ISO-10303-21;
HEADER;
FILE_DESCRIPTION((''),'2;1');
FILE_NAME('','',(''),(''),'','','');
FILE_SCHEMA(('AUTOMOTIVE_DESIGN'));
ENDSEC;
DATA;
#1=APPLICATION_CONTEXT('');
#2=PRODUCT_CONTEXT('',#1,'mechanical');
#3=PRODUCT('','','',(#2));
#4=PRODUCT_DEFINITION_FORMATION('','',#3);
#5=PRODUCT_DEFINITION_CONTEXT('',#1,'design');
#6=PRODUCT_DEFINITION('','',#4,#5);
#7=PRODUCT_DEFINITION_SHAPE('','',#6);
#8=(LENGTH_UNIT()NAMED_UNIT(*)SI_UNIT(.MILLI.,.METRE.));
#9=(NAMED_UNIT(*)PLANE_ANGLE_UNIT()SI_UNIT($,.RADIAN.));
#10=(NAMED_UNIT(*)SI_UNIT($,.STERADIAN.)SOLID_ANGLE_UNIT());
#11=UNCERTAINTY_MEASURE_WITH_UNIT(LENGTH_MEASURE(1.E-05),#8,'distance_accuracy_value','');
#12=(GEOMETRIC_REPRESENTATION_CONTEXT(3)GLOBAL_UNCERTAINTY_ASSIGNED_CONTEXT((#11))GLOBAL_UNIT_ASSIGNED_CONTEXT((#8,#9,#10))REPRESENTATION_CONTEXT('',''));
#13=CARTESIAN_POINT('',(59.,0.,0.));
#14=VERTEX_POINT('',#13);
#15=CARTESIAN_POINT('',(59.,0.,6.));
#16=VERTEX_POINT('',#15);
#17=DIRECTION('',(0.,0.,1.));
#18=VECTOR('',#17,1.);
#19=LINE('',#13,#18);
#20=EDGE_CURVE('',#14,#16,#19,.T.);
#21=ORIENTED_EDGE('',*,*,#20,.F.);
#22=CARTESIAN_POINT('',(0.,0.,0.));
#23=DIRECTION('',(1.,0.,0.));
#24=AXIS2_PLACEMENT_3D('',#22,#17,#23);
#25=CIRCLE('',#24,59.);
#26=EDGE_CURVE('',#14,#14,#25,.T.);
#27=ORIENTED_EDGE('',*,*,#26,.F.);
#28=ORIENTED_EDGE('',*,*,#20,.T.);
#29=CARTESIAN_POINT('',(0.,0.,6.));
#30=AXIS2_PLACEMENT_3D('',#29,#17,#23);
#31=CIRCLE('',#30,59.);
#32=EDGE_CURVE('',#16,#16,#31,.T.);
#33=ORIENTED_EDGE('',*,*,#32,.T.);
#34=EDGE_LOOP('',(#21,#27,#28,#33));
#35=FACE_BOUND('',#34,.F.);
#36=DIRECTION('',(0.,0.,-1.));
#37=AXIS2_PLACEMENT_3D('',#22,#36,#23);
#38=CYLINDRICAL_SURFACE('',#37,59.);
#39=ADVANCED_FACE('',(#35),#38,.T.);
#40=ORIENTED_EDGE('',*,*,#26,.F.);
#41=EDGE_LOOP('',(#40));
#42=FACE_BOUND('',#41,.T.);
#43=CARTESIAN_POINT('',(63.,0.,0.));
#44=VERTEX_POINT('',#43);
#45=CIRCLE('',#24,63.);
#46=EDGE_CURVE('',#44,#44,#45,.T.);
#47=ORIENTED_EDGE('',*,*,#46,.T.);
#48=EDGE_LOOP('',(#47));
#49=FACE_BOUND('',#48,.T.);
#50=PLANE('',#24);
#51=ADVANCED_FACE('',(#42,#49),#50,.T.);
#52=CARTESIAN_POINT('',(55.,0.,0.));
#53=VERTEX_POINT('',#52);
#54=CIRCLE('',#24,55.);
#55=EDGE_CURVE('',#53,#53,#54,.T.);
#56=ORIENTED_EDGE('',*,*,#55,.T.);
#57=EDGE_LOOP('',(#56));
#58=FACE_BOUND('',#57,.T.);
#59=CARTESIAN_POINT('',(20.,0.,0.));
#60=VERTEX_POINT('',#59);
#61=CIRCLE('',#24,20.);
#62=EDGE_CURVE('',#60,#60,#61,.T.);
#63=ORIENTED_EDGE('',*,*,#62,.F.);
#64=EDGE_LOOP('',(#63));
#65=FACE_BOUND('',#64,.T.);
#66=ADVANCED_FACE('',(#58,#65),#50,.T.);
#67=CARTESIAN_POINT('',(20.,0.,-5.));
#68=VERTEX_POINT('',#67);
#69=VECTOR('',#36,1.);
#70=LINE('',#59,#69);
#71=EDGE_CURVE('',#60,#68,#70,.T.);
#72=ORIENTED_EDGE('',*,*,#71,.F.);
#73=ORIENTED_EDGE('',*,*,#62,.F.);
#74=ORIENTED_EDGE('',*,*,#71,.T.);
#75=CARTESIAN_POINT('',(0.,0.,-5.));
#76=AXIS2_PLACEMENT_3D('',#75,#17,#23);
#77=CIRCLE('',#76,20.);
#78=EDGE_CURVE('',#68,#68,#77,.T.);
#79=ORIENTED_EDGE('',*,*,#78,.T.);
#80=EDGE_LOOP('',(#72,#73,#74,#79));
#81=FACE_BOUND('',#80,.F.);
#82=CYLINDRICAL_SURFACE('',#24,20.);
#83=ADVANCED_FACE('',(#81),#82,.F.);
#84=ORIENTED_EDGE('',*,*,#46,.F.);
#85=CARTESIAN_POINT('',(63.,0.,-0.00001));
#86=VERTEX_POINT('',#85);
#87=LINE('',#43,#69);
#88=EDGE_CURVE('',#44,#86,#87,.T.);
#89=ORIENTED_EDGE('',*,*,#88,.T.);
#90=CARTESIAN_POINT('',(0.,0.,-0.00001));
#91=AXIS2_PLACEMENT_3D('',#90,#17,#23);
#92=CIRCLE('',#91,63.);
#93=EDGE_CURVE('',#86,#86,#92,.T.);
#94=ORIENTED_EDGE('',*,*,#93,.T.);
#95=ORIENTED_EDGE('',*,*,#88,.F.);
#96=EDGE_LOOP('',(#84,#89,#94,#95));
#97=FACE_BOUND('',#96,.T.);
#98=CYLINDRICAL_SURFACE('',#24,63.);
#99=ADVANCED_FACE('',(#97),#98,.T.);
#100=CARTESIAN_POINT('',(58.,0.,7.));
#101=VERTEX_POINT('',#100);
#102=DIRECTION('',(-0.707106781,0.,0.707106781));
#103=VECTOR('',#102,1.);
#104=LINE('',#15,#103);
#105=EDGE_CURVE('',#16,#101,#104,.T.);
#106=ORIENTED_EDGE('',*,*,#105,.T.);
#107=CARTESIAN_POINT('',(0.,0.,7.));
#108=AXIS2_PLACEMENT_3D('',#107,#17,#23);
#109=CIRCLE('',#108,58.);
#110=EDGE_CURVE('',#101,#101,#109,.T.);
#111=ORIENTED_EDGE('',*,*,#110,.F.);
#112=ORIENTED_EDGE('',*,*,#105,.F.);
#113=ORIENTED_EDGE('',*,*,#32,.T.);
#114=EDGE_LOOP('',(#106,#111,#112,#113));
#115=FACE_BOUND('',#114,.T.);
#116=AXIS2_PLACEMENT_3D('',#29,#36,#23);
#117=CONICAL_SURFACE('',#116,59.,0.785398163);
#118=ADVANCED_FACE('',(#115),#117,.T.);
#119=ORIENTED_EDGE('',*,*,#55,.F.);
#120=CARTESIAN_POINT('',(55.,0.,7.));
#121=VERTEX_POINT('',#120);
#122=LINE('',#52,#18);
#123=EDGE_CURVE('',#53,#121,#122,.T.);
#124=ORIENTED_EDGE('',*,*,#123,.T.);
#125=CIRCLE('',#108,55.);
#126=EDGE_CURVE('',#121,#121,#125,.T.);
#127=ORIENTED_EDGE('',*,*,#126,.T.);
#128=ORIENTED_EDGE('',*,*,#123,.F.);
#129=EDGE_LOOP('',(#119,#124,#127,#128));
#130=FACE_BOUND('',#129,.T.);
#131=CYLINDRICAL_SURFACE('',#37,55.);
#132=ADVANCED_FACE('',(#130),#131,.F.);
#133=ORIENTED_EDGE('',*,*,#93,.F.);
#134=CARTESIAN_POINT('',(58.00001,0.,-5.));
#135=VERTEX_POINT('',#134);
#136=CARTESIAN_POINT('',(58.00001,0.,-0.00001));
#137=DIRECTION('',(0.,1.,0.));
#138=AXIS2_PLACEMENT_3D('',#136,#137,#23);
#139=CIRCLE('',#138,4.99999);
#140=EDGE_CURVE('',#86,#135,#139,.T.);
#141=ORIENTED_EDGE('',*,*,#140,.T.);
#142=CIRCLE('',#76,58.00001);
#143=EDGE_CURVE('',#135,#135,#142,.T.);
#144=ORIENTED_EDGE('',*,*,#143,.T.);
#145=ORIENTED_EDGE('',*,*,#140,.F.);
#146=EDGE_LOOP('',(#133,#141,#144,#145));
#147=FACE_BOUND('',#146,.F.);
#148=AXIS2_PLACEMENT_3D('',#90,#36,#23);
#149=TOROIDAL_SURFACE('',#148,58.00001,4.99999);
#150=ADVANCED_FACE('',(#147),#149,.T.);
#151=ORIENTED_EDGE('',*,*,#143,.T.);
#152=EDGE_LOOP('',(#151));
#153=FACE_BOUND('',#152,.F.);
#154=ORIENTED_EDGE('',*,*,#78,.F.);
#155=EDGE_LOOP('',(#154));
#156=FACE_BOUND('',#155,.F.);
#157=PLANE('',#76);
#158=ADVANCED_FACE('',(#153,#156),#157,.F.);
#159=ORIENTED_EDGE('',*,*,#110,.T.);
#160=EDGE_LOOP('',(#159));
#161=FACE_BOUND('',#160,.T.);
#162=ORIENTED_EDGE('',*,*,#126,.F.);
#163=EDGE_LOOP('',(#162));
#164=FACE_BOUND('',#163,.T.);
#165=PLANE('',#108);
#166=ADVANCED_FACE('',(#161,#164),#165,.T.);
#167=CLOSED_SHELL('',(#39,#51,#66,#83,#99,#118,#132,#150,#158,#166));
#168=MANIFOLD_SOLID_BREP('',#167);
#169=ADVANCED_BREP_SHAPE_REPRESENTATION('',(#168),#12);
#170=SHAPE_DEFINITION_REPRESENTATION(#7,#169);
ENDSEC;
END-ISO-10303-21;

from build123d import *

# Parameters (mm, degrees)
F0_R     = 59
F0_R_2   = 55
F1_DEPTH = 7
F0_R_3   = 63
F0_R_4   = 20
F2_DEPTH = 5
F3_R     = 4.99999
F4_SIZE  = 1


# Not quite as in the source:
# - a fillet or chamfer is up to 0.001 mm smaller than in the source, because OpenCascade refuses the exact size


with BuildPart() as f1:
    # F0 (on Top) → F1 (new body)
    with BuildSketch(Plane.XY):
        Circle(F0_R)
        Circle(F0_R_2, mode=Mode.SUBTRACT)
    extrude(amount=F1_DEPTH)

    # F0 (on Top) → F2 (join)
    with BuildSketch(Plane.XY):
        Circle(F0_R_3)
        Circle(F0_R, mode=Mode.SUBTRACT)
        Circle(F0_R)
        Circle(F0_R_2, mode=Mode.SUBTRACT)
        Circle(F0_R_2)
        Circle(F0_R_4, mode=Mode.SUBTRACT)
    extrude(amount=-F2_DEPTH)

    # F3 (radius 5 in the source; OpenCascade refuses exactly that, so slightly less here)
    f3_edges = [f1.edges().sort_by_distance(p)[0] for p in [
        (-63, 0, -5),
    ]]
    fillet(f3_edges, radius=F3_R)

    # F4
    f4_edges = [f1.edges().sort_by_distance(p)[0] for p in [
        (-59, 0, 7),
    ]]
    chamfer(f4_edges, length=F4_SIZE)


solid = f1.part
